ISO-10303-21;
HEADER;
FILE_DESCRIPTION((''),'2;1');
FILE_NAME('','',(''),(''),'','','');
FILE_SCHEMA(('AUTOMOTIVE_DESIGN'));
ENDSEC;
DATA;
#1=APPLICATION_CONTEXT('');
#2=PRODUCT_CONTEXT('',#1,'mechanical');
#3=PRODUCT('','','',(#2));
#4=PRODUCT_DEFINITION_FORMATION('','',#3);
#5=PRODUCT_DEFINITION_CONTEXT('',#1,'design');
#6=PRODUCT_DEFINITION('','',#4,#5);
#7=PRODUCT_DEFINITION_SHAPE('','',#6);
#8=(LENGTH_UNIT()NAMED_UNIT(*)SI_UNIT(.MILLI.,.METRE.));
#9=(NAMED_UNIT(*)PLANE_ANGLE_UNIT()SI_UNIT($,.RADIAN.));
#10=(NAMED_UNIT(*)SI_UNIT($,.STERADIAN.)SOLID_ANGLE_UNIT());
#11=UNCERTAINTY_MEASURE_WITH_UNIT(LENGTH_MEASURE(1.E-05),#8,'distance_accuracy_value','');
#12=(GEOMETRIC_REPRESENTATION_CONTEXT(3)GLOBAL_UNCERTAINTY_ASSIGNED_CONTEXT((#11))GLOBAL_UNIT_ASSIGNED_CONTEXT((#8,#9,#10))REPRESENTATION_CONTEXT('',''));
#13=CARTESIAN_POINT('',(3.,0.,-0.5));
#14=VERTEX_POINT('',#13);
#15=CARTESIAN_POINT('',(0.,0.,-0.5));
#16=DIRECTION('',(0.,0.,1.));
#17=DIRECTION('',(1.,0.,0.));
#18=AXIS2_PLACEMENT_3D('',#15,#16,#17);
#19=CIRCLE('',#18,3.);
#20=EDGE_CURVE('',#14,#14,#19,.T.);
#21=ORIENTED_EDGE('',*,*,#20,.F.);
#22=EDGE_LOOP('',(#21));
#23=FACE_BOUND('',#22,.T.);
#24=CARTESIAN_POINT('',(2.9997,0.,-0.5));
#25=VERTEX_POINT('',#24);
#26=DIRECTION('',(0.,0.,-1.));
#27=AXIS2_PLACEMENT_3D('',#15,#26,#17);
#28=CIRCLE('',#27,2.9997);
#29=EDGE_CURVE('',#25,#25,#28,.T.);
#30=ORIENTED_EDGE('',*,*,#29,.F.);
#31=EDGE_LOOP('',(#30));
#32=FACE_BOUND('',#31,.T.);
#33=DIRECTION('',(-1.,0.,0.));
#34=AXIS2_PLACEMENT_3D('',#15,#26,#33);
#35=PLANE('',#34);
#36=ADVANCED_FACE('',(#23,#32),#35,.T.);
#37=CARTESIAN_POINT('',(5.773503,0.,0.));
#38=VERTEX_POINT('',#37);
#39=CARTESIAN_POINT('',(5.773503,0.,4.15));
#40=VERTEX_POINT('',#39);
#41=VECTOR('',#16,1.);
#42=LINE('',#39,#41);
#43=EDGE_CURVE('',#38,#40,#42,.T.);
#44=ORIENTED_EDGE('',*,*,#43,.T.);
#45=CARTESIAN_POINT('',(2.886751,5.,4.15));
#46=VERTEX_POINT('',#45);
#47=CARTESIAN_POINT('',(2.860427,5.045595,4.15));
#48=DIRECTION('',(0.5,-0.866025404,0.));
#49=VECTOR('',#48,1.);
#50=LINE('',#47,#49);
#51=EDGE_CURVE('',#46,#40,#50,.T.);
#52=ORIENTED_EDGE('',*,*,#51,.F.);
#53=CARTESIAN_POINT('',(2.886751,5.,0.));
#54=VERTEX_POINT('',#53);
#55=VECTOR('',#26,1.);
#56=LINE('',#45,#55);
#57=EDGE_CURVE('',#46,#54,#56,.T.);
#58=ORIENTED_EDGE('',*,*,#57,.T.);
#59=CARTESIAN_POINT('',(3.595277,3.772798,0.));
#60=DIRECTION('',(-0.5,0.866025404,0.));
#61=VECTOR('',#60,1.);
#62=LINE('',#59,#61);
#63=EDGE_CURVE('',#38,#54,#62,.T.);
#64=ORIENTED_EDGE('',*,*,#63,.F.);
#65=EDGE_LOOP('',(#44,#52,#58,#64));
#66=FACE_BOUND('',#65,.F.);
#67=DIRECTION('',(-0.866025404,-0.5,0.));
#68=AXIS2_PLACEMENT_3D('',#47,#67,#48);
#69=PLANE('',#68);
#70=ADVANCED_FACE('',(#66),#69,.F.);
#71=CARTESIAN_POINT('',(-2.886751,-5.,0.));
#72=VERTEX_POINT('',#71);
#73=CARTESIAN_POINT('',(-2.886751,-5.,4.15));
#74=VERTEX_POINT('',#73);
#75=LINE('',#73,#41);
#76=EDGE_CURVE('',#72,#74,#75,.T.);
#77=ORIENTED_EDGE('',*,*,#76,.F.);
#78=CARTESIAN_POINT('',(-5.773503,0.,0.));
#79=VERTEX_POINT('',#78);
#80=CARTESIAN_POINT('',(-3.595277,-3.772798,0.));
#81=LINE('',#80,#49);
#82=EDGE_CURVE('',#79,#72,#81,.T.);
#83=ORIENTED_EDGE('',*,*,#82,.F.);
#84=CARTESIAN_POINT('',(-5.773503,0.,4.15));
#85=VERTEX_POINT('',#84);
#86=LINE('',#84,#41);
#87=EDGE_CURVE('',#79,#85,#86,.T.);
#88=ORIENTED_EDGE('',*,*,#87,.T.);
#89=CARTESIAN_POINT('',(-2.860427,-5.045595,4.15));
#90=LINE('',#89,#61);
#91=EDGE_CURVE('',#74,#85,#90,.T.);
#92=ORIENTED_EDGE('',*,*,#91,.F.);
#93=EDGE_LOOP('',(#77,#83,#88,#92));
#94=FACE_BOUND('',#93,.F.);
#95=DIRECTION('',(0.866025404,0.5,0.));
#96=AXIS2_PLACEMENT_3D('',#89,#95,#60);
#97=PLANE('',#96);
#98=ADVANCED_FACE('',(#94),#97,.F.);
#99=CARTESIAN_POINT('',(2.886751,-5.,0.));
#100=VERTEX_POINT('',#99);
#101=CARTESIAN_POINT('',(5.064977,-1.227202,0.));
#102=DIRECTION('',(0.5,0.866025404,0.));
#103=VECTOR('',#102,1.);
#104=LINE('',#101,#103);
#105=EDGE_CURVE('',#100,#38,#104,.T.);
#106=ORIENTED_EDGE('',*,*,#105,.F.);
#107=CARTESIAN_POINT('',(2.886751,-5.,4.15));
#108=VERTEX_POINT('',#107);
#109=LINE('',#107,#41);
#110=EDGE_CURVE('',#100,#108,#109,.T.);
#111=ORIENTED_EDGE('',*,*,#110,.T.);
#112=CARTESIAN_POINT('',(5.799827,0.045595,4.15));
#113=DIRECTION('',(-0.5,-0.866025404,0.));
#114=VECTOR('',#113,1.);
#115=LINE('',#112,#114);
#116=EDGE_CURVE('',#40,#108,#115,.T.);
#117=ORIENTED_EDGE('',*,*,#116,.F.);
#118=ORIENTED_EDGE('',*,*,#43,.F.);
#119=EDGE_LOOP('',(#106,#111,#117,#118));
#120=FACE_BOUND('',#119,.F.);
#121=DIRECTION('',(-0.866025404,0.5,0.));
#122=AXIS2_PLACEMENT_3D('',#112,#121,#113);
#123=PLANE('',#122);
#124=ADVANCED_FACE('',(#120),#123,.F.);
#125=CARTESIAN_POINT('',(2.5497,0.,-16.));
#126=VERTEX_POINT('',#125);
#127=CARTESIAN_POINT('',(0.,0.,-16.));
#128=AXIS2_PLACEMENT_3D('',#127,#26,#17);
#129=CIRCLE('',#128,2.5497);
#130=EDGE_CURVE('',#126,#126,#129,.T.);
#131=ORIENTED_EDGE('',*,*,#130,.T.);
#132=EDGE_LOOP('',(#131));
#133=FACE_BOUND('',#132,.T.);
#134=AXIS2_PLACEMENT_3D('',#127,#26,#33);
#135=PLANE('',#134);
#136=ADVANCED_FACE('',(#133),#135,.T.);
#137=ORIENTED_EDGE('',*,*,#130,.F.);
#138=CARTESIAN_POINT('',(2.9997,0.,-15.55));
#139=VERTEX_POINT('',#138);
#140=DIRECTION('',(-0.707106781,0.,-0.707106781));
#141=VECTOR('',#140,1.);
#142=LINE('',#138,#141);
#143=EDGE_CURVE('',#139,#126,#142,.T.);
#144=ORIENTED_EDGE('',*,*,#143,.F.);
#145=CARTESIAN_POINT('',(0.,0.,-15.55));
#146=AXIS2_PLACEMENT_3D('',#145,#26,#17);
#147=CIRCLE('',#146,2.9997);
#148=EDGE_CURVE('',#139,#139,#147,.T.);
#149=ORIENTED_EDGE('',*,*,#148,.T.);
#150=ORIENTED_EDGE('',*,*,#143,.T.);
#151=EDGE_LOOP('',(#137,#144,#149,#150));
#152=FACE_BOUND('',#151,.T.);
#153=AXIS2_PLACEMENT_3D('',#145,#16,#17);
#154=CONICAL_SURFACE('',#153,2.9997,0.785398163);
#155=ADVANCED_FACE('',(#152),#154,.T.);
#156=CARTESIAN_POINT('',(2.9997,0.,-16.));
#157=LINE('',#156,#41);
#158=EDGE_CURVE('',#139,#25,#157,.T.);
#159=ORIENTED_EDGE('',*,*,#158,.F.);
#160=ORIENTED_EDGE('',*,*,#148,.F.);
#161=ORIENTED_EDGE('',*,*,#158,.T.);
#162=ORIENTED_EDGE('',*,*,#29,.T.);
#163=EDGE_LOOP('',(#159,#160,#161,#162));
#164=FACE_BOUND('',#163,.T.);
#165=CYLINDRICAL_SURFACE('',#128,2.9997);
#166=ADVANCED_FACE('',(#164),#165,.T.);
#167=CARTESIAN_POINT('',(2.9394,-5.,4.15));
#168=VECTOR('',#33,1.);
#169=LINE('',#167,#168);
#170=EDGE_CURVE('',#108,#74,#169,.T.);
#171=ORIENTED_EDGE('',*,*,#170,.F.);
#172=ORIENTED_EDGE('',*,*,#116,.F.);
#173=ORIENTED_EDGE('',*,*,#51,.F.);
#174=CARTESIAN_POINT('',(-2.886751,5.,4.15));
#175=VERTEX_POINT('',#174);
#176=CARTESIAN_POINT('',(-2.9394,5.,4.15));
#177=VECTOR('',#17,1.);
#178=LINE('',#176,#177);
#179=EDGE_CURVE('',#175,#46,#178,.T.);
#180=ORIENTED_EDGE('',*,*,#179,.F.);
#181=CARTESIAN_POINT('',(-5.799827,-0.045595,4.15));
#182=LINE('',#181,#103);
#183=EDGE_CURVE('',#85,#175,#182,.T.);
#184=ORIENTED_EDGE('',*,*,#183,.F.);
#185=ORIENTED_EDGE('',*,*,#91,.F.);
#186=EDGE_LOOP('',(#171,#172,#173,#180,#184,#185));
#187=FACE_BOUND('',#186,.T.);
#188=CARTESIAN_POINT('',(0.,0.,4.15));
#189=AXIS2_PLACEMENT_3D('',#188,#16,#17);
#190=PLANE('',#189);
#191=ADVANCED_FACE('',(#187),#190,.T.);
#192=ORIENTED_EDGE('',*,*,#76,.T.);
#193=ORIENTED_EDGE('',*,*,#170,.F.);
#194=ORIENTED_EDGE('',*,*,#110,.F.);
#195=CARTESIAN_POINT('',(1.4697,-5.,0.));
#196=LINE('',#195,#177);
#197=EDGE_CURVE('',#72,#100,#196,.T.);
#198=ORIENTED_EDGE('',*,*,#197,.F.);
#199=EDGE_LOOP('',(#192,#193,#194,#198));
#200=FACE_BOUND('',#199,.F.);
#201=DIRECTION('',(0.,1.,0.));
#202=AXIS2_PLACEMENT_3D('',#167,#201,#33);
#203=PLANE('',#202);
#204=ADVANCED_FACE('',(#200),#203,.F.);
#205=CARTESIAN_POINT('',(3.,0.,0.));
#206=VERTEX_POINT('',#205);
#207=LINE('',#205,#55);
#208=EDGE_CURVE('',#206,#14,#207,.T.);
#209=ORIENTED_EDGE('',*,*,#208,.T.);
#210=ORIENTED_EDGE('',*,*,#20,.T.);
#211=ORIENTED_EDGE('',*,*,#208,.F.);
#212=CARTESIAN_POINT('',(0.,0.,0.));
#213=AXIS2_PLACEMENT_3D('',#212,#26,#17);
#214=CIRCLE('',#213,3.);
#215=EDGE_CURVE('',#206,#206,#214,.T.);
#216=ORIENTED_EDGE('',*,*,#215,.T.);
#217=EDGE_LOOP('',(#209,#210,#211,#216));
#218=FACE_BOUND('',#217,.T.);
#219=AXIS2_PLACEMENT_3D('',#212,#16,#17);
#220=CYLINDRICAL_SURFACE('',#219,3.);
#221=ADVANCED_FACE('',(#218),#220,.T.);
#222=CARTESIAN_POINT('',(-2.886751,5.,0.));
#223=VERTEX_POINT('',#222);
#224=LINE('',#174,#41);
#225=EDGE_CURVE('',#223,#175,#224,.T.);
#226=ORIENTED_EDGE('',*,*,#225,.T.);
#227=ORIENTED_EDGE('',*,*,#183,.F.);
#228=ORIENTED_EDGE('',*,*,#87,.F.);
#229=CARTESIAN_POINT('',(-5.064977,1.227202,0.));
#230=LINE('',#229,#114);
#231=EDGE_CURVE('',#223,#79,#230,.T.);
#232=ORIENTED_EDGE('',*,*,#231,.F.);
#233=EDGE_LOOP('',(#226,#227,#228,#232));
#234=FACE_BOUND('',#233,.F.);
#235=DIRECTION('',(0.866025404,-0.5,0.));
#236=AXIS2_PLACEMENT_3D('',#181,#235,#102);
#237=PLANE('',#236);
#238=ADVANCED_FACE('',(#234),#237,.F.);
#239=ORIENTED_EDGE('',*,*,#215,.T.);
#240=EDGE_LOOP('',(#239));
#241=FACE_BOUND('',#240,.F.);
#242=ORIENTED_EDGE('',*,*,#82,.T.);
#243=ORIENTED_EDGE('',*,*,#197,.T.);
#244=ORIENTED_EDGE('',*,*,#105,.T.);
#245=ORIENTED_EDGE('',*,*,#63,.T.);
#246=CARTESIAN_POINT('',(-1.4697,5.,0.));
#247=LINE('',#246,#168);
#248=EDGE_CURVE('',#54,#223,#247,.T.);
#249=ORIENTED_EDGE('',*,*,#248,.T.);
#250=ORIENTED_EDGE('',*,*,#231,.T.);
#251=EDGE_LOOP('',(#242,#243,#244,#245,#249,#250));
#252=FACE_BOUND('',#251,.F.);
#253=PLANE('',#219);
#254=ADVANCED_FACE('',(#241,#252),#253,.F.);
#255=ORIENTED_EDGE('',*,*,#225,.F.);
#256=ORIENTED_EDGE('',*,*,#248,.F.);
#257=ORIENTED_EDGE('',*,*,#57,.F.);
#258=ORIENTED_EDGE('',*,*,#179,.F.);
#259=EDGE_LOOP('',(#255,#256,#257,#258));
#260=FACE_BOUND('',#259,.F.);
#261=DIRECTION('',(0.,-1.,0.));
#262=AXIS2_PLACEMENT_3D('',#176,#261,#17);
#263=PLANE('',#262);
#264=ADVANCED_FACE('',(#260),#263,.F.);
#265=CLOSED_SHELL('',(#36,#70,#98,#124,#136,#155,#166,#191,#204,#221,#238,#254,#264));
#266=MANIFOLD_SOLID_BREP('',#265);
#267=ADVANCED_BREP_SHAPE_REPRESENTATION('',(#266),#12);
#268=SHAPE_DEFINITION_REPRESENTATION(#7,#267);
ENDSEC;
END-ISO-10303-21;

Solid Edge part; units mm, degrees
sketch "Sketch1" plane through (0, 0, 0) normal (0, 0, 1) x (1, 0, 0)
  circle A0 centre (0, 0) radius 5.8
  dimension "D1" = 11.6
extrude "Protrusion1" add sketch "Sketch1" along normal blind 4.15
sketch "Sketch2" plane through (0, 0, 0) normal (0, 0, -1) x (1, 0, 0)
  circle A0 centre (0, 0) radius 3
extrude "Protrusion2" add sketch "Sketch2" along normal blind 16
sketch "Sketch3" plane through (0, 0, -16) normal (0, 0, -1) x (1, 0, 0)
  circle A0 centre (0, 0) radius 2.9997
extrude "Cutout1" cut sketch "Sketch3" against normal blind 15.5 flip side to cut
chamfer "Chamfer_1" distance 0.45 angle 45 1 edges at (-2.9997, 0, -16)
sketch "Sketch4" plane through (0, 0, 4.15) normal (0, 0, 1) x (1, 0, 0)
  line L0 (-2.9394, 5) -> (2.9394, 5)
  dimension "D1" = 10
extrude "Cutout2" cut sketch "Sketch4" against normal up to next material side at (0, 5.05, 4.15)
pattern_circular "Pattern1" count 6 over 360 about axis through (0, 0, 4.15) along (0, 0, 1) of "Cutout2"
properties part number "24104921"
